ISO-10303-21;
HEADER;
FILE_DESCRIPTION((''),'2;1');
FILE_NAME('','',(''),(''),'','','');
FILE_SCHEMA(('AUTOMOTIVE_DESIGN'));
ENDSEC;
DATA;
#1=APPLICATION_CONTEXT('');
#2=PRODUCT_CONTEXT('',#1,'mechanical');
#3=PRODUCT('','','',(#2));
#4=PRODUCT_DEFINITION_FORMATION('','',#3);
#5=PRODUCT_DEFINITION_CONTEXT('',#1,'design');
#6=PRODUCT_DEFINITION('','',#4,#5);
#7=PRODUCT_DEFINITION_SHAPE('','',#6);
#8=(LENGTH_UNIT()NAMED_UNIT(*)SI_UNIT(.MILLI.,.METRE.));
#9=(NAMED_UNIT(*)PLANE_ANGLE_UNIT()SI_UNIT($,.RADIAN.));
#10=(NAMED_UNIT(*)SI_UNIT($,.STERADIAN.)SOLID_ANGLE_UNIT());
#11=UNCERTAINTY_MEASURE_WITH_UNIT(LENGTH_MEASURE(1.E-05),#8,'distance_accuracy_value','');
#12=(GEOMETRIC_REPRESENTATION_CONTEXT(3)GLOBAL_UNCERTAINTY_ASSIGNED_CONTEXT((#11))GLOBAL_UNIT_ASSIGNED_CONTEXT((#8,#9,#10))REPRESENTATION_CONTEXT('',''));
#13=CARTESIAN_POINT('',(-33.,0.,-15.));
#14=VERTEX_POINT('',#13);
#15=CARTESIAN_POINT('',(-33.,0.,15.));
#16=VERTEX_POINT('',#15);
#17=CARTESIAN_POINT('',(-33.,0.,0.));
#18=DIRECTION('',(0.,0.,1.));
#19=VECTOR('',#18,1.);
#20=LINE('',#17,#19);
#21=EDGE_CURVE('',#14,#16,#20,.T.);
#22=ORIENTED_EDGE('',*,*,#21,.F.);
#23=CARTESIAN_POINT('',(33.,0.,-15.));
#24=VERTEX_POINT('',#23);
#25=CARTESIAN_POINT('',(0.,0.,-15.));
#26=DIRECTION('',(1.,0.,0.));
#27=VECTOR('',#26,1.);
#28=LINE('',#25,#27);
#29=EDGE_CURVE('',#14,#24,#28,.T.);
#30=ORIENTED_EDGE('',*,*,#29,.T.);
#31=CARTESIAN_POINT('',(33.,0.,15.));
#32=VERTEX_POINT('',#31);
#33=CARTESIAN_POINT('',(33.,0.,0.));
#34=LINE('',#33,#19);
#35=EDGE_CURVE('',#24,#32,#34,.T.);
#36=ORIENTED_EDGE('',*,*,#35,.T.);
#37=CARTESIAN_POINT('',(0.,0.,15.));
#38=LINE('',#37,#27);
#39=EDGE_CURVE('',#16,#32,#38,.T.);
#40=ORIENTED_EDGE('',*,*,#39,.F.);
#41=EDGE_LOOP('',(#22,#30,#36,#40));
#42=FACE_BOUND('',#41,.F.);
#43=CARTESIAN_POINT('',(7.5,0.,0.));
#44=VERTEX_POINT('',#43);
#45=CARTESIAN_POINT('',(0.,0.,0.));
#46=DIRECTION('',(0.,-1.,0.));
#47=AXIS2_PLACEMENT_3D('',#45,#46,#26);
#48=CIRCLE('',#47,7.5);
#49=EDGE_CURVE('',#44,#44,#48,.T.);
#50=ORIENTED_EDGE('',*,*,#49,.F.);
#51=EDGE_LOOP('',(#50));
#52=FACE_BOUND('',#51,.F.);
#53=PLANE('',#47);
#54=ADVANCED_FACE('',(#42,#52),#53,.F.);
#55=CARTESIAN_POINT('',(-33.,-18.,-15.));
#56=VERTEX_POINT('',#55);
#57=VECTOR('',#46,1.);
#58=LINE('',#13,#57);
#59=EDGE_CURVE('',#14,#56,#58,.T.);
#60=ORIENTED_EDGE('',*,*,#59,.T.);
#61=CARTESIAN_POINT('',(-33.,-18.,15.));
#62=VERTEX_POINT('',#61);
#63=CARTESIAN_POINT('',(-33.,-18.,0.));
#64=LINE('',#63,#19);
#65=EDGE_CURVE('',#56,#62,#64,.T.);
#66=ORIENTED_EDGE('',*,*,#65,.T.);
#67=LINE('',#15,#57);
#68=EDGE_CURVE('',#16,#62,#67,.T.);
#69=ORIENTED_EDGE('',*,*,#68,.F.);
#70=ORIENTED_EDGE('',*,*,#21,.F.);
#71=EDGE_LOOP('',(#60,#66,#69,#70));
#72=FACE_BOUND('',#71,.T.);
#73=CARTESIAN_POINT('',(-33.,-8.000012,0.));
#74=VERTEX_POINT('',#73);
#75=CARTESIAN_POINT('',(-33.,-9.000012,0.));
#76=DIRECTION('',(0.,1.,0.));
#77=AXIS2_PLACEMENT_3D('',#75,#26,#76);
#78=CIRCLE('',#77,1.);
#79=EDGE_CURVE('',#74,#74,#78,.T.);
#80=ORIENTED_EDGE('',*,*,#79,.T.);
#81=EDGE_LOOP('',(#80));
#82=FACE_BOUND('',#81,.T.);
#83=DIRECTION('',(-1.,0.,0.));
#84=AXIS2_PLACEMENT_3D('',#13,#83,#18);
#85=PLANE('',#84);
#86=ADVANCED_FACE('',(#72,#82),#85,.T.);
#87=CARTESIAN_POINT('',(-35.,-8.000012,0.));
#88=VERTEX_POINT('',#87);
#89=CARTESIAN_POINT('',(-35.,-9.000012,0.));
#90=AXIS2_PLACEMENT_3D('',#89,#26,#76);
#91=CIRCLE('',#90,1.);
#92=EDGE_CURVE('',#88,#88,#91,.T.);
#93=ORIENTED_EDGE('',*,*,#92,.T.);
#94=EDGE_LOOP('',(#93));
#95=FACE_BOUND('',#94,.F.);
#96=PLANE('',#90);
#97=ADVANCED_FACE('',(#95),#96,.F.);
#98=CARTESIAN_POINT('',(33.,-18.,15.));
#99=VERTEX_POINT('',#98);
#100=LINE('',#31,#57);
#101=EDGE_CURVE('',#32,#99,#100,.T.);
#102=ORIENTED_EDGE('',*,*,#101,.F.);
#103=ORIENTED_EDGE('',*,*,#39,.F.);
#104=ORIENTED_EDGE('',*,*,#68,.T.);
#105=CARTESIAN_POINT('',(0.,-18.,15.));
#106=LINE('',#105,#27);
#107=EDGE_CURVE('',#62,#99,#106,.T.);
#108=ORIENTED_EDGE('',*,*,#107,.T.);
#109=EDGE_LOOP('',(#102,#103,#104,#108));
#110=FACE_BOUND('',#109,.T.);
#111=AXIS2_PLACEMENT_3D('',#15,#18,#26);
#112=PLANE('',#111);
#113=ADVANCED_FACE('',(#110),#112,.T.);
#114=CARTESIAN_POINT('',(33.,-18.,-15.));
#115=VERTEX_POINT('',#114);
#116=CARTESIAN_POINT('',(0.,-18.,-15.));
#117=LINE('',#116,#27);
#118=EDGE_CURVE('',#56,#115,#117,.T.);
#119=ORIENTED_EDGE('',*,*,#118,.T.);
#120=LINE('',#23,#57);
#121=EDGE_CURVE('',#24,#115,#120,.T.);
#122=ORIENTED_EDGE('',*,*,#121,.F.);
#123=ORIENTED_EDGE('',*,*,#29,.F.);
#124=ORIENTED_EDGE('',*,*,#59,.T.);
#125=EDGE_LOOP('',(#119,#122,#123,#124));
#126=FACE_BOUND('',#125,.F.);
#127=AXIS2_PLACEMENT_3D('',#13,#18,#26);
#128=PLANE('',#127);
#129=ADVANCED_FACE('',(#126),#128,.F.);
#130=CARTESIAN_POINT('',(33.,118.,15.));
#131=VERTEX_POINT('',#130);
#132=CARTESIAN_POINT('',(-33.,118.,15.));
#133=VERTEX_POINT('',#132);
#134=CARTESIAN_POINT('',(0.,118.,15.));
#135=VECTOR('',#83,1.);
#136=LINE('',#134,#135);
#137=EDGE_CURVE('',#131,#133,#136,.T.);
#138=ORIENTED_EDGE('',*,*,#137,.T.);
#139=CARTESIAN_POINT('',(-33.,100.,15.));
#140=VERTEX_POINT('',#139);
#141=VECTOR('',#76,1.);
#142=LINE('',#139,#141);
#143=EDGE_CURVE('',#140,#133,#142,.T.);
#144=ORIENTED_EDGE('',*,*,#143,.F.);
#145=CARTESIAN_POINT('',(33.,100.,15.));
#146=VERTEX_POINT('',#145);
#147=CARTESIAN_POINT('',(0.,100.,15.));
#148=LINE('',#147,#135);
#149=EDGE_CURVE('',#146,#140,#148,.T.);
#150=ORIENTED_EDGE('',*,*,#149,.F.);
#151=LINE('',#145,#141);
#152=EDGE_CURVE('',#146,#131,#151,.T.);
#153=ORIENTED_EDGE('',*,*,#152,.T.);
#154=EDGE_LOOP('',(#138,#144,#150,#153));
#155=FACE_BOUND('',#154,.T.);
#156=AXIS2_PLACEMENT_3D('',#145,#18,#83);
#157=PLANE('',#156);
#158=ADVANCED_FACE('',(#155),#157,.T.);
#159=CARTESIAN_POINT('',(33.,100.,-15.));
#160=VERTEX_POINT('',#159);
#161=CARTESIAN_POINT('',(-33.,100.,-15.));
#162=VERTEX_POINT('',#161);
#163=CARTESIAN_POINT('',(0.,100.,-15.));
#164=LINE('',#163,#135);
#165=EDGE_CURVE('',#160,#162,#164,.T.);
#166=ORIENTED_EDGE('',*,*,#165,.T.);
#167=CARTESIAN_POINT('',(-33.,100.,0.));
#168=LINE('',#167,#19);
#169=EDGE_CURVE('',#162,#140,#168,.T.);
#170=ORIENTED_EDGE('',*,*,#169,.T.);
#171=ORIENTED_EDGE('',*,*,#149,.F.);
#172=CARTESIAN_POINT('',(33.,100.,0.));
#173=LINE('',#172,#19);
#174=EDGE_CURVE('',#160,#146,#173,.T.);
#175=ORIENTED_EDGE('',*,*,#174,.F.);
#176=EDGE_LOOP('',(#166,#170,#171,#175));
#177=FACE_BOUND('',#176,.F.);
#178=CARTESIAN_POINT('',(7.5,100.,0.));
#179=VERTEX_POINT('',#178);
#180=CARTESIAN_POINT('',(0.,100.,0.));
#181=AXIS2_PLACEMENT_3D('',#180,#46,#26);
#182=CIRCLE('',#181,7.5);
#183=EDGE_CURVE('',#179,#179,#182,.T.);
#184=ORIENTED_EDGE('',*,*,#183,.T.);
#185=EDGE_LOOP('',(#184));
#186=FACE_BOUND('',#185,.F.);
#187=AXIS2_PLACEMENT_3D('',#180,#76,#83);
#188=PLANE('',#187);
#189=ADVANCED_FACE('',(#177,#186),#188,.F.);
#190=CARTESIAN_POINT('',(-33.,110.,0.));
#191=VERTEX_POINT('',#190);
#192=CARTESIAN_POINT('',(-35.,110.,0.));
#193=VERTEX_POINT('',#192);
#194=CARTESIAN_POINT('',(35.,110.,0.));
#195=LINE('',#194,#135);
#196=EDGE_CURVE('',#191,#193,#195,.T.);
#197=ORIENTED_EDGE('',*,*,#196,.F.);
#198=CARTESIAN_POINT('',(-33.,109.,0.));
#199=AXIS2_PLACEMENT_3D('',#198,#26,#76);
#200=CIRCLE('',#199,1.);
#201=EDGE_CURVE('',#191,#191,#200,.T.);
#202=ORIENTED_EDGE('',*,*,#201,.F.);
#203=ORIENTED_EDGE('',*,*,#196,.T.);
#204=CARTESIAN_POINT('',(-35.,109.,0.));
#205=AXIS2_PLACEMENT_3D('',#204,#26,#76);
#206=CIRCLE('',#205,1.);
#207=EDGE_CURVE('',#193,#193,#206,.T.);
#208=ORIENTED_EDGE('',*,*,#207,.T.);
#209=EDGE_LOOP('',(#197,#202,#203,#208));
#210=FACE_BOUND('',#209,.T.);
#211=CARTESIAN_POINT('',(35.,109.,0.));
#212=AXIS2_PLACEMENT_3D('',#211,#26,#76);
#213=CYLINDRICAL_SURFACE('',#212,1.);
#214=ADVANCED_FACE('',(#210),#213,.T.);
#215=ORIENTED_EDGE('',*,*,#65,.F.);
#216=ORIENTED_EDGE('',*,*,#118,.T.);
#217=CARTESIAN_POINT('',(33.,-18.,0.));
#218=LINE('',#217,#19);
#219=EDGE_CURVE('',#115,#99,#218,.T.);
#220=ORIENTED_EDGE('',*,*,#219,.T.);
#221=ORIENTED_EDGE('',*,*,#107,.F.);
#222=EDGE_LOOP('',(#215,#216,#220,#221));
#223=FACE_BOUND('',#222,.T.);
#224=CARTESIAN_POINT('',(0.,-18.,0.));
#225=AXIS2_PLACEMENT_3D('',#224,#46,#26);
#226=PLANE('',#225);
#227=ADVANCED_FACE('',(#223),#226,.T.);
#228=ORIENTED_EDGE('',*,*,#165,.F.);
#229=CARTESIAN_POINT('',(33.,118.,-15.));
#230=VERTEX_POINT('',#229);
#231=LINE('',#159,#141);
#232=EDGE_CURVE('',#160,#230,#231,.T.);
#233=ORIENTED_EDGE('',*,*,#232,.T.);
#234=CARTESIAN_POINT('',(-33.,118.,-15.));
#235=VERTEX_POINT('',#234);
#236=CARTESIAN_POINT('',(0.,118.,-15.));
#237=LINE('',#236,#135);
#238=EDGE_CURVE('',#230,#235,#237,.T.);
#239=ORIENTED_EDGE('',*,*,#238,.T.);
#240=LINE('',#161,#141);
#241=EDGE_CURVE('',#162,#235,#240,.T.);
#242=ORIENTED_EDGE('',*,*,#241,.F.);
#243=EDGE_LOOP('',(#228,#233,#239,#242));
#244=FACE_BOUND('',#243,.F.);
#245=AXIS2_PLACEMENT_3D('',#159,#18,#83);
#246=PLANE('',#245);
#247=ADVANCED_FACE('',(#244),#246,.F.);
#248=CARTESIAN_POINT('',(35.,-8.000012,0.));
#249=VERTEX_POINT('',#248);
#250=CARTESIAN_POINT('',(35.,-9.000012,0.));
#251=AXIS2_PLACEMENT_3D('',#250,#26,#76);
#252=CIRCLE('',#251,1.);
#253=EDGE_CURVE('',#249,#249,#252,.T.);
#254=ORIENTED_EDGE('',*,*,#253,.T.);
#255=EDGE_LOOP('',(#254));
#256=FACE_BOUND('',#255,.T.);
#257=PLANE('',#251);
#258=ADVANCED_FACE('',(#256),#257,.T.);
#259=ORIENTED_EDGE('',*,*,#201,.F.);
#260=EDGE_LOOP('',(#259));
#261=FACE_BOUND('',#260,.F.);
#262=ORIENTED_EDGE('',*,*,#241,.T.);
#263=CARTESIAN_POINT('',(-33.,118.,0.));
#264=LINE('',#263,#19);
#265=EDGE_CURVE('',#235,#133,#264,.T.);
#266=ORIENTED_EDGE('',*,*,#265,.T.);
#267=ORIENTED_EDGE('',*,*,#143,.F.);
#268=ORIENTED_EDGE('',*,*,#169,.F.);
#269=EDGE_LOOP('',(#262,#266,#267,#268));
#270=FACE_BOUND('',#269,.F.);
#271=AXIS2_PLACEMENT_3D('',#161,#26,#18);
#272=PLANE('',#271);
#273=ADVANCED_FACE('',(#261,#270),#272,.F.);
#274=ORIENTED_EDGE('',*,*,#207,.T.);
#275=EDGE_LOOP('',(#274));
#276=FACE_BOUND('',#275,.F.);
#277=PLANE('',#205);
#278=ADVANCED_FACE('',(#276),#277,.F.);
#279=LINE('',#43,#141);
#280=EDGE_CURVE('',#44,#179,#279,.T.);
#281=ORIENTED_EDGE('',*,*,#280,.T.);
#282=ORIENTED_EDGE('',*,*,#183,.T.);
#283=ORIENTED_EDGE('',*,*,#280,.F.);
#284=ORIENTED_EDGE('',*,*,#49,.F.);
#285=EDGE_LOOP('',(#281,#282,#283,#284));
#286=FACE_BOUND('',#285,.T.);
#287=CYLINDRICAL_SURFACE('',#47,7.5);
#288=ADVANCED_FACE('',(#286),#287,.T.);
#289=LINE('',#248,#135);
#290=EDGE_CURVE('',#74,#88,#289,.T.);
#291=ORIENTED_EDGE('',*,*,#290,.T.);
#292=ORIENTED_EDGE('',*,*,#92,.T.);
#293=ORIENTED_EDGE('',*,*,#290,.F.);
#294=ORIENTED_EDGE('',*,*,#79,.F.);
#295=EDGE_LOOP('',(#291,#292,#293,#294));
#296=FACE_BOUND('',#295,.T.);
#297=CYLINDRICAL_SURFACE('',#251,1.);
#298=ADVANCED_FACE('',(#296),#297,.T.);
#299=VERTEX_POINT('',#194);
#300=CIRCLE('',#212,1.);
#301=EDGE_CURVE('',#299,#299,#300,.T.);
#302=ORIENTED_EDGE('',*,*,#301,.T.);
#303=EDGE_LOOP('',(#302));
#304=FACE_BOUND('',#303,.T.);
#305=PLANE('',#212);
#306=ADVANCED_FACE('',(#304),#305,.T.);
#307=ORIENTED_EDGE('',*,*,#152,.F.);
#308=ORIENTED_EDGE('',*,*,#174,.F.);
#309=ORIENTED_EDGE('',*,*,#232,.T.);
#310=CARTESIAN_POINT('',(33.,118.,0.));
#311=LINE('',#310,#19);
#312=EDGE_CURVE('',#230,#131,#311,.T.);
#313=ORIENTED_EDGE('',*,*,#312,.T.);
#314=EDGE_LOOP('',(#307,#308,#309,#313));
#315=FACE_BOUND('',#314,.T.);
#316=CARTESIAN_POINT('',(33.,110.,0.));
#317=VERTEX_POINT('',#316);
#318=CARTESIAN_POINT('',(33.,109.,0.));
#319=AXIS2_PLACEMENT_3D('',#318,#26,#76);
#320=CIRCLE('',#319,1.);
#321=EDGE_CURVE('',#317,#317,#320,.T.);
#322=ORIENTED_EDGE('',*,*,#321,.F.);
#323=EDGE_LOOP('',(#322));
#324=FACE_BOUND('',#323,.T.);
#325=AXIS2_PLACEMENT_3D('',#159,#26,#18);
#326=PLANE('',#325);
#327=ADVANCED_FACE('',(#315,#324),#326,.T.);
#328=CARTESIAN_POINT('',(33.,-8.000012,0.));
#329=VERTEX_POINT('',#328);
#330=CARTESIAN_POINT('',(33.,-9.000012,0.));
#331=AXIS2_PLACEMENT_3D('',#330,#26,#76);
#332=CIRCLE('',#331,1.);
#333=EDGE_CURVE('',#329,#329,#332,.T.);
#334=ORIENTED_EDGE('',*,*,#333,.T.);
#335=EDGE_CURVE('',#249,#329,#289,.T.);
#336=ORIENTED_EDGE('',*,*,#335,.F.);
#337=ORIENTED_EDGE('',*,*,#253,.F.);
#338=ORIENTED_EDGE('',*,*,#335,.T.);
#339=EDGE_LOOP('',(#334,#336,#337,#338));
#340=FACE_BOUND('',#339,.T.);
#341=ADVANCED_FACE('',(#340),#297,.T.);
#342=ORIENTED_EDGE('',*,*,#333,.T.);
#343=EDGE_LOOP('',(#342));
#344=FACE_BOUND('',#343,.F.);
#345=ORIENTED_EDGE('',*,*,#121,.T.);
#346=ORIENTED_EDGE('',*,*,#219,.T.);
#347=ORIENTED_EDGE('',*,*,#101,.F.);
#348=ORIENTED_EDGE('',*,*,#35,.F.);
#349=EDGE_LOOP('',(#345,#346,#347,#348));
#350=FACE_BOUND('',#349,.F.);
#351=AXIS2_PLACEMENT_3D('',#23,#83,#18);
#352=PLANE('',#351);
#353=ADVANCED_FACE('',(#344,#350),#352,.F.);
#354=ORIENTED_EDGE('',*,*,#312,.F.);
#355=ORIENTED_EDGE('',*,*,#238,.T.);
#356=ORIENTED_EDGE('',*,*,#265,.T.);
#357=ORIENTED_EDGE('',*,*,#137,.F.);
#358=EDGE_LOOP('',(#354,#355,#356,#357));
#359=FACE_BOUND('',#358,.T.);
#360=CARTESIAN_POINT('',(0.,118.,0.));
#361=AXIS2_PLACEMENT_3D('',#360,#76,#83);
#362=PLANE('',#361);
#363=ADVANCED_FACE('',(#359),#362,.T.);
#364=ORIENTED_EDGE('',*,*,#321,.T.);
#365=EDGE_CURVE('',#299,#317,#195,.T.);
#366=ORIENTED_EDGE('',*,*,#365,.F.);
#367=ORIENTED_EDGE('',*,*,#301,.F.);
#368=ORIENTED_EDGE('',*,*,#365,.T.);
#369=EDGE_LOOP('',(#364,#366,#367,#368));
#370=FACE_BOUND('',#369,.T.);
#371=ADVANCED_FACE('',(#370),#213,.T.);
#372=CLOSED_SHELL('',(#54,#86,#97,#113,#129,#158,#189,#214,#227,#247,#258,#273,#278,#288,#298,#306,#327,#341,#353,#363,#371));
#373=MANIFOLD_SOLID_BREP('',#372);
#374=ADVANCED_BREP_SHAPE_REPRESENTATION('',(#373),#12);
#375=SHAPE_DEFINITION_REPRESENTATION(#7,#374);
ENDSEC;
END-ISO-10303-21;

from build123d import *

# Parameters (mm, degrees)
F0_W     = 66
F0_H     = 30
F0_R     = 7.5
F1_DEPTH = 18
F3_R     = 1
F4_DEPTH = 70
F5_DEPTH = 100
F6_W     = 66
F6_H     = 30
F6_R     = 7.5
F7_DEPTH = 18
F8_R     = 1
F9_DEPTH = 70


# Not quite as in the source:
# - a feature names something its author has since deleted; it is built from what else it names


with BuildPart() as f1:
    # F0 (on Front) → F1 (new body)
    with BuildSketch(Plane.XZ):
        Rectangle(F0_W, F0_H)
        Circle(F0_R, mode=Mode.SUBTRACT)
        Circle(F0_R)
    extrude(amount=F1_DEPTH)

    # F3 (on offset) → F4 (join)
    with BuildSketch(Plane.YZ.offset(35)):
        with Locations((-9.0000117198, 0)):
            Circle(F3_R)
    extrude(amount=-F4_DEPTH)

    # F0 (on Front) → F5 (join)
    with BuildSketch(Plane.XZ):
        Circle(F0_R)
    extrude(amount=-F5_DEPTH)

    # F6 (on face) → F7 (join)
    with BuildSketch(Plane(origin=(0, 100, 0), x_dir=(-1, 0, 0), z_dir=(0, 1, 0))):
        Rectangle(F6_W, F6_H)
        Circle(F6_R, mode=Mode.SUBTRACT)
        Circle(F6_R)
    extrude(amount=F7_DEPTH)

    # F8 (on offset) → F9 (join)
    with BuildSketch(Plane.YZ.offset(35)):
        with Locations((109, 0)):
            Circle(F8_R)
    extrude(amount=-F9_DEPTH)


solid = f1.part
